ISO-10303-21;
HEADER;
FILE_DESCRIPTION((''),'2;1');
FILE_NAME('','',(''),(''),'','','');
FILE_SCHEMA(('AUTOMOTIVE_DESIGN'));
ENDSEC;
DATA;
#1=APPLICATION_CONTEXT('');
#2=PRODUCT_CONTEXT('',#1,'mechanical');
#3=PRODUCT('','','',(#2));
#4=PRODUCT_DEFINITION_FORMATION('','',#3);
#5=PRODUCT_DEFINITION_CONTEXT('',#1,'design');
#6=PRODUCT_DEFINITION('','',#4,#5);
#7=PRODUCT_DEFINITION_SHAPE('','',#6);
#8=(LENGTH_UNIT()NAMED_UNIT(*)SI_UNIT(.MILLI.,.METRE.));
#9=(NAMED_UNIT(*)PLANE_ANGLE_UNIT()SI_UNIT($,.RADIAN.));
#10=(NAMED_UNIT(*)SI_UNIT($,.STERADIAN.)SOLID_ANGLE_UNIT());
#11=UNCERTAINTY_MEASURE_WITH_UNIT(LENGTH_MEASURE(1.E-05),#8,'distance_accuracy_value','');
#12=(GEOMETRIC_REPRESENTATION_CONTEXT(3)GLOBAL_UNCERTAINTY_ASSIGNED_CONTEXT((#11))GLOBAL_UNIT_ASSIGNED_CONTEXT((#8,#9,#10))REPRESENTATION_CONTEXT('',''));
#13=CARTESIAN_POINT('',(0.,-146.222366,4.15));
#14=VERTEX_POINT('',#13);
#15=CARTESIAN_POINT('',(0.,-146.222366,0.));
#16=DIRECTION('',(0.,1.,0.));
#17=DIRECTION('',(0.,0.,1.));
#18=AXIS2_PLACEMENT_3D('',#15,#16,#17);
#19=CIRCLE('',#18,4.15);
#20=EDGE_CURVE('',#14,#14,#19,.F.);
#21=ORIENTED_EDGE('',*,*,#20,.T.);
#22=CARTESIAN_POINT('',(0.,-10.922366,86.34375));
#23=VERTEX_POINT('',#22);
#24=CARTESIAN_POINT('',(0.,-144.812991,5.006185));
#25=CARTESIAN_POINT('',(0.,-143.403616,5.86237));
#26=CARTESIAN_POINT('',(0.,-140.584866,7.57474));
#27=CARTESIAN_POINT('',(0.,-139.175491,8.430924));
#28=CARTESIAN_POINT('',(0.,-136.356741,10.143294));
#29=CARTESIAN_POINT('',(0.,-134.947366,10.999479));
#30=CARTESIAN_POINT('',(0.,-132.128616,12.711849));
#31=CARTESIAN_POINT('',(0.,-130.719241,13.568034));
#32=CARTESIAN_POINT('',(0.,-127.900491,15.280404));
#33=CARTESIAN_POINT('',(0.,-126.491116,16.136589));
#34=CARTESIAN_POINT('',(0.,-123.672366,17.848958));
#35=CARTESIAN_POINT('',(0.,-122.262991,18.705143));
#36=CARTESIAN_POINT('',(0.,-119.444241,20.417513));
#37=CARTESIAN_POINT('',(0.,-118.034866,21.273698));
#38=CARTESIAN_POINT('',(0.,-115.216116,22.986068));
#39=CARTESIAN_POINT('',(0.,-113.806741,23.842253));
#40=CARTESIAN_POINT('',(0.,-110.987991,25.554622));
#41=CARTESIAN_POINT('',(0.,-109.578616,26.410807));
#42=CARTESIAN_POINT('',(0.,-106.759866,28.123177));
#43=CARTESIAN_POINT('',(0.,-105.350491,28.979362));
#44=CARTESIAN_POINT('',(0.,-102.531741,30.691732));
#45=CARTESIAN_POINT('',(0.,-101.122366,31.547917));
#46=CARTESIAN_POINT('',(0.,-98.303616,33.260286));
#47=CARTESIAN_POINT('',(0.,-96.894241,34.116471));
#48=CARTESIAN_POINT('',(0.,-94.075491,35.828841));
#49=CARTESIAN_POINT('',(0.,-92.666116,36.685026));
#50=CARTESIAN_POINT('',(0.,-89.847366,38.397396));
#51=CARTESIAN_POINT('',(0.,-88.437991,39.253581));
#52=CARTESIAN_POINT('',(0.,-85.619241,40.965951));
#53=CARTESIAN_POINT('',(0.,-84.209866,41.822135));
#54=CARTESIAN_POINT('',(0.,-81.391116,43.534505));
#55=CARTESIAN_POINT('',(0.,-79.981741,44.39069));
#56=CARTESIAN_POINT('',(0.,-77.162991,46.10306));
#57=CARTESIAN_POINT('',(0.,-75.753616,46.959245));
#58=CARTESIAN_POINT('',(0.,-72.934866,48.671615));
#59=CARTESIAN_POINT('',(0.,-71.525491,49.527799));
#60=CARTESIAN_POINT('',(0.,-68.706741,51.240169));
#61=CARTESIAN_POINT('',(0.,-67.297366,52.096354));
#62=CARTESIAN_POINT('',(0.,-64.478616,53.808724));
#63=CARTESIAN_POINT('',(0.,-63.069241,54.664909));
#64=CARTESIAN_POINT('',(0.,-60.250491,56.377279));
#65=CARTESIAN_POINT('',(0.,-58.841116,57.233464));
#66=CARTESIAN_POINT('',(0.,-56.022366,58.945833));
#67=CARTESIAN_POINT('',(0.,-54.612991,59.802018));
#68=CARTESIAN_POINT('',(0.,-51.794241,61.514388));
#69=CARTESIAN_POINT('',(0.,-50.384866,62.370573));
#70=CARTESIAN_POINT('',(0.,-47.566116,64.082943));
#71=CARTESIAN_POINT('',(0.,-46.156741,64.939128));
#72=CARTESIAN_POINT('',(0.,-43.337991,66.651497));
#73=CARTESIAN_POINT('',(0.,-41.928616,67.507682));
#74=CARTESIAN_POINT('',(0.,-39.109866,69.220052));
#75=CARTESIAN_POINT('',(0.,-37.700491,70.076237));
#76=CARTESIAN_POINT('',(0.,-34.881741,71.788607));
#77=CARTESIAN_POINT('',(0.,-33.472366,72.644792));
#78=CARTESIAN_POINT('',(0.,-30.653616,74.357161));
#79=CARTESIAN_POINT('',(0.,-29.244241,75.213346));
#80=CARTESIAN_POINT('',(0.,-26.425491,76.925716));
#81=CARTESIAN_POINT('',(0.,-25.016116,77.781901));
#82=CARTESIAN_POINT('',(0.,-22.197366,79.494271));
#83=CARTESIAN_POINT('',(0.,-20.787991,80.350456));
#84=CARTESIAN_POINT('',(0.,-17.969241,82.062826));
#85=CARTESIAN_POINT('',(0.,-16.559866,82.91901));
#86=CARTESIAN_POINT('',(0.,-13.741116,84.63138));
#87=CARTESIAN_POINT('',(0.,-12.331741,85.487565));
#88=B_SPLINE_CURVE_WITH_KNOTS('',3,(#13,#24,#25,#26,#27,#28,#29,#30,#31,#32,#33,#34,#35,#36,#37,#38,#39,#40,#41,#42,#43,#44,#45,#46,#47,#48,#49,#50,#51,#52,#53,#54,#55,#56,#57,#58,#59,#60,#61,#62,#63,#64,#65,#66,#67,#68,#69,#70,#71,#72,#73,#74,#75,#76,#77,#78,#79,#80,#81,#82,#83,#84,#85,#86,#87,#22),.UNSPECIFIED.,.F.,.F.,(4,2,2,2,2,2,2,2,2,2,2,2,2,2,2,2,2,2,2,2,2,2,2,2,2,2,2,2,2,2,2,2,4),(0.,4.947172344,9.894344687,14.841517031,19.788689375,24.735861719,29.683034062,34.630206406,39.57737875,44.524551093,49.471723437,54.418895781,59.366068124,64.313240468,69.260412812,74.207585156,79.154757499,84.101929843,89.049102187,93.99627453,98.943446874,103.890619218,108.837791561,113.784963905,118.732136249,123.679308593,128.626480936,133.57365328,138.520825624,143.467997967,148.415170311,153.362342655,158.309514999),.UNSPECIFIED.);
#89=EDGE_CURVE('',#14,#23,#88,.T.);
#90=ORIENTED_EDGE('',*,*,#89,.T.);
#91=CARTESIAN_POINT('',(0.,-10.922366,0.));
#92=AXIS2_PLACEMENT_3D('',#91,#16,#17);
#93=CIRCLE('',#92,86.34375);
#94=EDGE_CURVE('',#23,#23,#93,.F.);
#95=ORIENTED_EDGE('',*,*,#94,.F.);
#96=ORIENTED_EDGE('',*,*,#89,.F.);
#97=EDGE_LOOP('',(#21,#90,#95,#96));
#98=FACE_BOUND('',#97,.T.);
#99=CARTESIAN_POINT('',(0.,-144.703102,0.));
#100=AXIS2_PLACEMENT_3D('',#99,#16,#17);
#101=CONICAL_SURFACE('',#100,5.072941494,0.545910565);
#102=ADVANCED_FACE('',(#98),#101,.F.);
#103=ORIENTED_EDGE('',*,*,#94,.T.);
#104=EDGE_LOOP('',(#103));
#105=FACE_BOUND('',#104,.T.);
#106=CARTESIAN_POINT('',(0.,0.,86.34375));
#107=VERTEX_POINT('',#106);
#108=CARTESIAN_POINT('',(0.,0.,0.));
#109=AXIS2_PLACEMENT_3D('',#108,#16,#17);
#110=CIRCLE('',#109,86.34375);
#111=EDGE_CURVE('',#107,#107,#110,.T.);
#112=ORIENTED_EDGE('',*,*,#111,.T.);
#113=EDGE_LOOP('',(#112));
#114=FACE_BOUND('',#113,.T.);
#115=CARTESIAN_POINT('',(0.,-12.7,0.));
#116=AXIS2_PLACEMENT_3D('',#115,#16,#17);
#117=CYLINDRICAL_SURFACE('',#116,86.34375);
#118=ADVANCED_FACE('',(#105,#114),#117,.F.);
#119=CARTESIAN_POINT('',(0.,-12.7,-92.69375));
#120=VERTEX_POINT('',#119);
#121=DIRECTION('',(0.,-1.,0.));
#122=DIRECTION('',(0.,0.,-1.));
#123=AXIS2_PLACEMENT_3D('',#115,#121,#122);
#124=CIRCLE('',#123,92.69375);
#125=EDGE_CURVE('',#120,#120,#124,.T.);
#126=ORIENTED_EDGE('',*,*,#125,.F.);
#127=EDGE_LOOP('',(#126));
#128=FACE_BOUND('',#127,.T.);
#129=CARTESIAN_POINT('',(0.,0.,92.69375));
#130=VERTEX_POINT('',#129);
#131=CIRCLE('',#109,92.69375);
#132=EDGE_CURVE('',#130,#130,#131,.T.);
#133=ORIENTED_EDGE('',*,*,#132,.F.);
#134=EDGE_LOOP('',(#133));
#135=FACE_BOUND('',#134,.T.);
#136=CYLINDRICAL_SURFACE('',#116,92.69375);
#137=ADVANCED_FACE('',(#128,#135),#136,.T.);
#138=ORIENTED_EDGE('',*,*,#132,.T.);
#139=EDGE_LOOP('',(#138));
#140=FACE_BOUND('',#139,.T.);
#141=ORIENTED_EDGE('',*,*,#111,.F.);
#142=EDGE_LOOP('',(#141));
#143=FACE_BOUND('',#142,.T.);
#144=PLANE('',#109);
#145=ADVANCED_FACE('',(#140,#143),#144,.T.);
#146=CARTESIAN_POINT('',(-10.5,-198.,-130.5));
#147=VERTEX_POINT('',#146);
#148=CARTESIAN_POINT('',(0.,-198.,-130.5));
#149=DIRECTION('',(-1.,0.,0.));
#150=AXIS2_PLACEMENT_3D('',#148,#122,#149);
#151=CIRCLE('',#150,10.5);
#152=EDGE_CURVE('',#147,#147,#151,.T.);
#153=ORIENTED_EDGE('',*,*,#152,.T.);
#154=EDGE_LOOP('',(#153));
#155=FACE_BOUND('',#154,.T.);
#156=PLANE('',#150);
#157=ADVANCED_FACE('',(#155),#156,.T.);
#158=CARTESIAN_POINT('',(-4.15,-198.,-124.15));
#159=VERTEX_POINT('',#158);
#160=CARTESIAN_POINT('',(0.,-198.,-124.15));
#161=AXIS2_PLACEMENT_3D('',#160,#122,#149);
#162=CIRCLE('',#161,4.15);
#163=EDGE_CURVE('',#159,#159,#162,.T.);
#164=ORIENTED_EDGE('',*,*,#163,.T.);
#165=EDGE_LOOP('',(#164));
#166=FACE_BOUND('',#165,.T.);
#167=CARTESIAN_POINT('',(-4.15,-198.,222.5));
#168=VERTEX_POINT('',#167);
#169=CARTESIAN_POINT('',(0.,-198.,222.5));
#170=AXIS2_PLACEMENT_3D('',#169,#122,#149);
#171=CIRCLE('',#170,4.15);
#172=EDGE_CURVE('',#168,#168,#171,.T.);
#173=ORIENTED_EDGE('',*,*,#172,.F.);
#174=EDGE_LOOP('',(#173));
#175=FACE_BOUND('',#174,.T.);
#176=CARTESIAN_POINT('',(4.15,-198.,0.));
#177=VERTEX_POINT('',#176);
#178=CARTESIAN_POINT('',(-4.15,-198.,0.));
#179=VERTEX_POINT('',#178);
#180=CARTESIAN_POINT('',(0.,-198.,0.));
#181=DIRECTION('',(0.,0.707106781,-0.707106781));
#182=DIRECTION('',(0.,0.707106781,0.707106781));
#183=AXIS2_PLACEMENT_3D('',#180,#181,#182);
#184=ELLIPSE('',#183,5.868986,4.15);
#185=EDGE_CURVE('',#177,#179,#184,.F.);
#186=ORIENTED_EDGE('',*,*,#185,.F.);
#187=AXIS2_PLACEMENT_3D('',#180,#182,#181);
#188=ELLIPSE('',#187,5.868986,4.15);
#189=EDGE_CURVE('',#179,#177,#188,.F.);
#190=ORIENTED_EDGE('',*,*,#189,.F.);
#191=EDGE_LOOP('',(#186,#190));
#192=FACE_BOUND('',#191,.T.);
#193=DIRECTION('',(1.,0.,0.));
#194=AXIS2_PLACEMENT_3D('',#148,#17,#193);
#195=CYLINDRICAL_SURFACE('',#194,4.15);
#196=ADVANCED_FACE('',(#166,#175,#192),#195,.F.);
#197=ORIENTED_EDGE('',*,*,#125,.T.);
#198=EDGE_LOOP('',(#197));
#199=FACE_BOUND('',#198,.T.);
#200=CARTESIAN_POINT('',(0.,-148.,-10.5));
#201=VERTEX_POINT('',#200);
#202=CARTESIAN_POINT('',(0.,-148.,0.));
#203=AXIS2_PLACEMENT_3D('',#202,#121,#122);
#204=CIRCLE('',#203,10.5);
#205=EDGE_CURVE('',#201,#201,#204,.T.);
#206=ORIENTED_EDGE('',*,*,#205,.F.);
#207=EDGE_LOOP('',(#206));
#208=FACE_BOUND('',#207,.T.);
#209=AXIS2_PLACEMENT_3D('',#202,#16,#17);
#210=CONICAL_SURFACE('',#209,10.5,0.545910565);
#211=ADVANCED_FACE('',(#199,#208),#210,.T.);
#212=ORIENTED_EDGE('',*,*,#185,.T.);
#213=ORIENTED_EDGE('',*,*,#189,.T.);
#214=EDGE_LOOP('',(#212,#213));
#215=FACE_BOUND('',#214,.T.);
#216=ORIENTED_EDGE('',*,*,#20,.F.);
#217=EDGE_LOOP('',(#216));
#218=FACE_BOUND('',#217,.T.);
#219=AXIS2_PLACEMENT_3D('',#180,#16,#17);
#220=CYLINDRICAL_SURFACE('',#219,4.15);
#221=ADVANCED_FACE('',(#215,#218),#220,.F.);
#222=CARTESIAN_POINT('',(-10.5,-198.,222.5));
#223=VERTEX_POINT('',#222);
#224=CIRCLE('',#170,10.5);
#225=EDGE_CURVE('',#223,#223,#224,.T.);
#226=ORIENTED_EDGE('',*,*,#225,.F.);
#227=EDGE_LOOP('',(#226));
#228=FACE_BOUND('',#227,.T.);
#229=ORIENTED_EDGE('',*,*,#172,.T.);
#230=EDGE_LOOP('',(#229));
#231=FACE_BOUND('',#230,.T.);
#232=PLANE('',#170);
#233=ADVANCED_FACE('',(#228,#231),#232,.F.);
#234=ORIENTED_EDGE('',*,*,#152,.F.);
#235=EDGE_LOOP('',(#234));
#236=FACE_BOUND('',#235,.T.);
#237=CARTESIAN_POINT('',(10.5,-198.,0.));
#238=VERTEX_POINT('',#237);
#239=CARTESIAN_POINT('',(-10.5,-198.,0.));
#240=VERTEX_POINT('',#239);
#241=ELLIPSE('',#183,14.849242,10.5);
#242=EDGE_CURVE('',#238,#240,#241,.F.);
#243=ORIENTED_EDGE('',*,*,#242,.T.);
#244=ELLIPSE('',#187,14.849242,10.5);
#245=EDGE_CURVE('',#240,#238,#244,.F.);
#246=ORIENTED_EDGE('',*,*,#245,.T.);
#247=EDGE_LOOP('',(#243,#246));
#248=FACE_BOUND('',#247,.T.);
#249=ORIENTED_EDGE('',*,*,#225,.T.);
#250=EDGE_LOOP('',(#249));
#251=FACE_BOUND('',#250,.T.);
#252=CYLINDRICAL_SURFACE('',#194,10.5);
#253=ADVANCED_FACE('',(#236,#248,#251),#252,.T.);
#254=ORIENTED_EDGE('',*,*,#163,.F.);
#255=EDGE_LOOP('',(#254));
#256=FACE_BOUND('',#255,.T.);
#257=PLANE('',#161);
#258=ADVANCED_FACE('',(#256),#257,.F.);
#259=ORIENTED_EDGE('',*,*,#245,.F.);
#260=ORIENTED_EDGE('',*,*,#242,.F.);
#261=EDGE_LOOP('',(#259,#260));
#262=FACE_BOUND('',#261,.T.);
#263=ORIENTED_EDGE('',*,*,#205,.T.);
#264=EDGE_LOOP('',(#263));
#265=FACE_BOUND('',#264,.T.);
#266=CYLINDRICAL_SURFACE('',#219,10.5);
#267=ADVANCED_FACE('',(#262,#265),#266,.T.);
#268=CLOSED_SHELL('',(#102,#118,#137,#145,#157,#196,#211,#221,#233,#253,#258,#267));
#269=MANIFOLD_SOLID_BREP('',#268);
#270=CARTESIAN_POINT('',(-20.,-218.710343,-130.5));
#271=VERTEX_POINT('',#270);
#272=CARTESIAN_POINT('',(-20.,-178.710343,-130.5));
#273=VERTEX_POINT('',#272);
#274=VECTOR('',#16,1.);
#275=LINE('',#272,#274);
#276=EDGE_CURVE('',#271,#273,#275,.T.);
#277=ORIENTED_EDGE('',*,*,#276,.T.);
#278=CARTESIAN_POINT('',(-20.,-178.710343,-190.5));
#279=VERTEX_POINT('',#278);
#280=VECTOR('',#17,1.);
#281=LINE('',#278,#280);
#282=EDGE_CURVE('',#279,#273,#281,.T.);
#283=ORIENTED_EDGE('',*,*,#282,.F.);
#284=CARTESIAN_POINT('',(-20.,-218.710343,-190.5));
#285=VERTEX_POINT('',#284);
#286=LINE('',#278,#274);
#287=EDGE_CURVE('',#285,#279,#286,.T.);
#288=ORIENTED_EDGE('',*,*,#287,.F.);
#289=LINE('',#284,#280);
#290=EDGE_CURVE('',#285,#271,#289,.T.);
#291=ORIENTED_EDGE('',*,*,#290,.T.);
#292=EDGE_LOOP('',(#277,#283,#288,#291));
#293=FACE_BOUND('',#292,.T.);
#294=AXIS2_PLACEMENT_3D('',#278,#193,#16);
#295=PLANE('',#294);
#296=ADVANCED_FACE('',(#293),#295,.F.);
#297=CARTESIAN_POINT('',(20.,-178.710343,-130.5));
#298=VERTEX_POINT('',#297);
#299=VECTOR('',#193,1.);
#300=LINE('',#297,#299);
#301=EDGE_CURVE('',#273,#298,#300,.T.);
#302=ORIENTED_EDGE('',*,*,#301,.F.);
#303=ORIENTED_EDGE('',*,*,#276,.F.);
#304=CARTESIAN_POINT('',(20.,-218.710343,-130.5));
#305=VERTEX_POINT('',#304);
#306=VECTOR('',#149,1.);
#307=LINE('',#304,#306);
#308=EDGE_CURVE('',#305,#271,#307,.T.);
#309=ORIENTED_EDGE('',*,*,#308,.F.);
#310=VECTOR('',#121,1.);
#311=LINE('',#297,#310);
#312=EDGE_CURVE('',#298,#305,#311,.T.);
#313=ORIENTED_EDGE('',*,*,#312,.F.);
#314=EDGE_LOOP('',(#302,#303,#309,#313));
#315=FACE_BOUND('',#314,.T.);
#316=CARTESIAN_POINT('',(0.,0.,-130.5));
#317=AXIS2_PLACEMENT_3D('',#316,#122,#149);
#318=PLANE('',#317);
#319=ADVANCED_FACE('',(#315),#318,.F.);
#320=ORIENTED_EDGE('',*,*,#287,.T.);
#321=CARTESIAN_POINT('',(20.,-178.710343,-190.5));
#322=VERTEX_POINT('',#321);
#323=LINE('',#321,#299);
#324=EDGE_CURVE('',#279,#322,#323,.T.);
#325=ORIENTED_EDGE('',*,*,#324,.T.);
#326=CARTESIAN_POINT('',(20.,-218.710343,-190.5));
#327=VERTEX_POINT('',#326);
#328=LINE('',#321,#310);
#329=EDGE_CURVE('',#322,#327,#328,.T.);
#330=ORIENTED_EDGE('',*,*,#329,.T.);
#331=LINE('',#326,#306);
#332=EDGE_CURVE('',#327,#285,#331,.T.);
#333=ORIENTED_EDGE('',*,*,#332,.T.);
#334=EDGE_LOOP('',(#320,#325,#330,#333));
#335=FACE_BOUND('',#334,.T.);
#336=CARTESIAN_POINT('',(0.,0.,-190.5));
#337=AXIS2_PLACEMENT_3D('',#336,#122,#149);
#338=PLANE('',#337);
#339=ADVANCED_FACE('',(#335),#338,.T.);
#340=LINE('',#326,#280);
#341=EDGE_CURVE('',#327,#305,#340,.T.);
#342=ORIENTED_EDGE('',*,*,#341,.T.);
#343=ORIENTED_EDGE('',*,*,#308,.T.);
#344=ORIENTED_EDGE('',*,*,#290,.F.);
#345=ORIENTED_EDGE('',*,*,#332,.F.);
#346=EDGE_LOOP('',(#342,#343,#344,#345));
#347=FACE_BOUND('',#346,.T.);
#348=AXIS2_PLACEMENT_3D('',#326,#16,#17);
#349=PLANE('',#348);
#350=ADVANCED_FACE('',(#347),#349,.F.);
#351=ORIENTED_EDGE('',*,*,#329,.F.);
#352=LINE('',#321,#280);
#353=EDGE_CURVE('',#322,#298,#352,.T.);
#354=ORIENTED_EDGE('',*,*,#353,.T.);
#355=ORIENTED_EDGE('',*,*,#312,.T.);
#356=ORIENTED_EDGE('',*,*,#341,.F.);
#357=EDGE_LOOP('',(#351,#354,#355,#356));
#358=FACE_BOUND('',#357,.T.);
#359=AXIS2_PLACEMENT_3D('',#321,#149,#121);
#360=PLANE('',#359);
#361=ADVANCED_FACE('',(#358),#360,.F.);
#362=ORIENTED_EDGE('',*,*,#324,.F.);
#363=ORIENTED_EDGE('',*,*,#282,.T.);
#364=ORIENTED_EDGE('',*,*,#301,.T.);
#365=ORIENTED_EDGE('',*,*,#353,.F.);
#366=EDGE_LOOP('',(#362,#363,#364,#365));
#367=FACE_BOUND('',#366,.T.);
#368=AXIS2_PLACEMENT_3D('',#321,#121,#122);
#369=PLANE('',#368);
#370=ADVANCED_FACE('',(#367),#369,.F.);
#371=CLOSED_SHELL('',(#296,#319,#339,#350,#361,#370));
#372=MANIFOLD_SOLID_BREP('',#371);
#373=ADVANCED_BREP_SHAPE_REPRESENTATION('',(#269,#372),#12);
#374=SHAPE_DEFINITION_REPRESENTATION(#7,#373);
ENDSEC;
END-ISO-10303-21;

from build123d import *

# Parameters (mm, degrees)
CROQUIS1_R                   = 92.69375
SALIENTE_EXTRUIR1_DEPTH      = 12.7
CROQUIS3_R                   = 10.5
CROQUIS2_R                   = 92.69375
CROQUIS4_R                   = 10.5
SALIENTE_EXTRUIR2_DEPTH      = 50
SALIENTE_EXTRUIR3_DEPTH      = 120
SALIENTE_EXTRUIR3_DEPTH_BACK = 233
CROQUIS5_R                   = 10.5
CROQUIS6_W                   = 40
CROQUIS6_H                   = 40
SALIENTE_EXTRUIR4_DEPTH      = 60


with BuildPart() as part:
    # Croquis1 → Saliente-Extruir1 (new body)
    with BuildSketch(Plane(origin=(0, 0, 0), x_dir=(1, 0, 0), z_dir=(0, 1, 0))):
        with Locations(Location((0, 0, 0), (0, 0, 270))):
            Circle(CROQUIS1_R)
    extrude(amount=-SALIENTE_EXTRUIR1_DEPTH)

    # Croquis3 → Recubrir1 section 0
    with BuildSketch(Plane(origin=(0, -148, 0), x_dir=(1, 0, 0), z_dir=(0, 1, 0))):
        Circle(CROQUIS3_R)
    # Croquis2 → Recubrir1 section 1
    with BuildSketch(Plane.XZ.offset(12.7)):
        Circle(CROQUIS2_R)
    loft()

    # Croquis4 → Saliente-Extruir2 (add)
    with BuildSketch(Plane.XZ.offset(148)):
        with Locations(Location((0, 0, 0), (0, 0, 270))):
            Circle(CROQUIS4_R)
    extrude(amount=SALIENTE_EXTRUIR2_DEPTH)

    # Croquis5 → Saliente-Extruir3 (add, two sides: drawn at the far end of the back side and taken through both)
    with BuildSketch(Plane(origin=(0, 0, -10.5), x_dir=(-1, 0, 0), z_dir=(0, 0, -1)).offset(-SALIENTE_EXTRUIR3_DEPTH_BACK)):
        with Locations((0, -198)):
            Circle(CROQUIS5_R)
    extrude(amount=SALIENTE_EXTRUIR3_DEPTH + SALIENTE_EXTRUIR3_DEPTH_BACK)

    # Vaciado1: read off the stored shape, not the designer's step
    # Vaciado1 outline → Vaciado1 (revolve, cut)
    with BuildSketch(Plane.XY):
        Polygon((0, -198), (4.15, -198), (4.15, -146.22236581), (86.34375, -10.92236581), (86.34375, 0), (0, 0), align=None)
    revolve(axis=Axis((0, 0, 0), (0, 1, 0)), mode=Mode.SUBTRACT)

    # Vaciado1 2: loft between two sections, ruled curve by curve
    vaciado1_2_from = [
        Edge.make_three_point_arc((-4.15, -198, -124.15), (0, -202.15, -124.15), (4.15, -198, -124.15)),
        Edge.make_three_point_arc((4.15, -198, -124.15), (0, -193.85, -124.15), (-4.15, -198, -124.15)),
    ]
    vaciado1_2_to = [
        Edge.make_three_point_arc((-4.15, -198, 222.5), (0, -202.15, 222.5), (4.15, -198, 222.5)),
        Edge.make_three_point_arc((4.15, -198, 222.5), (0, -193.85, 222.5), (-4.15, -198, 222.5)),
    ]
    vaciado1_2 = Solid(Shell([*[Face.make_surface_from_curves(vaciado1_2_from[k], vaciado1_2_to[k]) for k in range(2)], Face(Wire(vaciado1_2_from)), Face(Wire(vaciado1_2_to))]))
    add(vaciado1_2, mode=Mode.SUBTRACT)


with BuildPart() as body_2:
    # Croquis6 → Saliente-Extruir4 (new body)
    with BuildSketch(Plane(origin=(0, 0, -130.5), x_dir=(-1, 0, 0), z_dir=(0, 0, -1))):
        with Locations((0, -198.710342853)):
            Rectangle(CROQUIS6_W, CROQUIS6_H)
    extrude(amount=SALIENTE_EXTRUIR4_DEPTH)


solid = Compound([part.part, body_2.part])
